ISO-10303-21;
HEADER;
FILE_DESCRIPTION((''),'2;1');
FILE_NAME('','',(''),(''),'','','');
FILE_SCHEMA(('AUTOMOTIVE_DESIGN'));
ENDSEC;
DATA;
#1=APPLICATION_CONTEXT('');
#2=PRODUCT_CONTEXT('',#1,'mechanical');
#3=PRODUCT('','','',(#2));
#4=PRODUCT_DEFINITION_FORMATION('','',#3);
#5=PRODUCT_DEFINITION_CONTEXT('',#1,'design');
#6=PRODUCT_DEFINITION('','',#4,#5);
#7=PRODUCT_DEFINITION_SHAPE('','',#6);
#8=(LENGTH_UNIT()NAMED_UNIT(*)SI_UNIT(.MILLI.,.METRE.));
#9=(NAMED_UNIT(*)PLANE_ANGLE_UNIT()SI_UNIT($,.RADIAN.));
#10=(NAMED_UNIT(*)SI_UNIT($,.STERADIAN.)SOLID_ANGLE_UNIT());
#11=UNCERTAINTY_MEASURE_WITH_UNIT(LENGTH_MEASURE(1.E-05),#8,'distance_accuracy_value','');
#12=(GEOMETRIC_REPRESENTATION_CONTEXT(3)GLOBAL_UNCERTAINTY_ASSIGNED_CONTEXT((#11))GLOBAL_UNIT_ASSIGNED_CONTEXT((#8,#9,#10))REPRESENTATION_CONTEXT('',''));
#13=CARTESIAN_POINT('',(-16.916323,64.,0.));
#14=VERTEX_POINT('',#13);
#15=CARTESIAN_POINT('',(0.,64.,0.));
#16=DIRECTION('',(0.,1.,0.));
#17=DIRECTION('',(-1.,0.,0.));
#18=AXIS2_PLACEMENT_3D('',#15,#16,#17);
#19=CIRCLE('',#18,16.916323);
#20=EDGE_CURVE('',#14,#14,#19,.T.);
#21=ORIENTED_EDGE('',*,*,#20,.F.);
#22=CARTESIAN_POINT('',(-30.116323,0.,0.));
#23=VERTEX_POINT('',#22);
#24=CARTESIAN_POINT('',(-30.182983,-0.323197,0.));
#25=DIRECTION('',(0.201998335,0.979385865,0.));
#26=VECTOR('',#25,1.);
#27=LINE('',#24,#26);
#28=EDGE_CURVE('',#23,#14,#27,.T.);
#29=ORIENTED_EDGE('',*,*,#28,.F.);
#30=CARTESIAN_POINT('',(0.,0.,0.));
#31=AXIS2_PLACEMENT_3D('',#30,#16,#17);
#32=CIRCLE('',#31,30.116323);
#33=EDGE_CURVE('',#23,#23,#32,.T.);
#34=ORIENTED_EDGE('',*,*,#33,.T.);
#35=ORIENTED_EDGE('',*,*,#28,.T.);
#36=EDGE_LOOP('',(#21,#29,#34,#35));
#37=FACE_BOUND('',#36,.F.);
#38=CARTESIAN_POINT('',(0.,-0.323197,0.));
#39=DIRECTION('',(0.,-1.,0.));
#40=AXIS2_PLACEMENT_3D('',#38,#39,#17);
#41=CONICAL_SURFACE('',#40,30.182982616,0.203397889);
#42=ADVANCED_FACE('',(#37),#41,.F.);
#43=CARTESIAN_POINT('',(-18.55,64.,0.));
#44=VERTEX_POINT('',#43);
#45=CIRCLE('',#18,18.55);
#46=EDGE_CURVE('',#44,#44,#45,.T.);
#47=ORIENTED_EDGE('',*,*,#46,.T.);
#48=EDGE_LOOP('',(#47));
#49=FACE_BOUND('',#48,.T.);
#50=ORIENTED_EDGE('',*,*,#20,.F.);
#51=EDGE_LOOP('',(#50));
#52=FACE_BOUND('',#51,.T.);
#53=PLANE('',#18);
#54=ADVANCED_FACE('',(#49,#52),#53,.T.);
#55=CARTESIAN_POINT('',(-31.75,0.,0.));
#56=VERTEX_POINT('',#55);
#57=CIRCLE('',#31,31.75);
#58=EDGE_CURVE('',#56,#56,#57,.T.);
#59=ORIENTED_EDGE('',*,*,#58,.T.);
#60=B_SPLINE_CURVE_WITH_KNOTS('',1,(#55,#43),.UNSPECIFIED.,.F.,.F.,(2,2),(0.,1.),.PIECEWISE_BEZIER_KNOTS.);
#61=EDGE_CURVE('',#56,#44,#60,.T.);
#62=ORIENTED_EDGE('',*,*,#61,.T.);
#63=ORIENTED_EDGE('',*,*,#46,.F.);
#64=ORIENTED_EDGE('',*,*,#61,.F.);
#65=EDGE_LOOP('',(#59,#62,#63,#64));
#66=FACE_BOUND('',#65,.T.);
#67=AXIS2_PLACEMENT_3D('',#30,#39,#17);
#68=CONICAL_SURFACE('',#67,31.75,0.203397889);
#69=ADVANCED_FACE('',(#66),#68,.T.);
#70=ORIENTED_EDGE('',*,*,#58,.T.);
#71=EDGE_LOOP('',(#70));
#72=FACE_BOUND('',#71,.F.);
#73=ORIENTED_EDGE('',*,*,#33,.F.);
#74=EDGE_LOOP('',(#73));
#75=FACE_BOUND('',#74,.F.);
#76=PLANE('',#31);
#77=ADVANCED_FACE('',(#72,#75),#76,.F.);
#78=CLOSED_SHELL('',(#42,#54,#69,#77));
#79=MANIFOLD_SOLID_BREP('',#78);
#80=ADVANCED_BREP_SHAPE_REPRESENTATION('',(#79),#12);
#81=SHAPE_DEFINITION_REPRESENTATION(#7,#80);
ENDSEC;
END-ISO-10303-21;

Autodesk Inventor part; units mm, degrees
ref_plane "YZ Plane" through (0, 0, 0) normal (1, 0, 0) x (0, 1, 0)
ref_plane "XY Plane" through (0, 0, 0) normal (0, 0, 1) x (1, 0, 0)
sketch "Szkic6" plane through (0, 0, 0) normal (0, 1, 0) x (-1, 0, 0)
  circle A0 centre (0, 0) radius 31.75
  dimension "d33" = 63.5
ref_plane "Płaszczyzna konstrukcyjna1" through (0, 64, 0) normal (0, 1, 0) x (-1, 0, 0)
sketch "Szkic7" plane through (0, 64, 0) normal (0, 1, 0) x (-1, 0, 0)
  circle A0 centre (0, 0) radius 18.55
  dimension "d35" = 37.1
loft "Wyciągnięcie złożone1" add profiles "Szkic6", "Szkic7"
shell "Skorupa1" thickness 1.6 removed faces 2 at (-0.5746, 64, -5.4455) at (14.3997, 0, 5.5289)
equation "\"d33\" = OD1"
equation "\"d35\" = OD2"
equation "\"d52\" = THK"
equation "\"SzerokośćGięciaPodcięcia\" = Grubość"
equation "\"RozmiarPodcięciaNarożnika\" = 4 * Grubość"
equation "\"PromieńPrzejścia\" = PromieńGięcia"
equation "\"Rozmiar_promienia_Jacobiego\" = PromieńGięcia"
equation "\"Wielk_odstępu\" = Grubość"
equation "\"d2\" = PromieńGięcia"
equation "\"d23\" = PromieńGięcia"
equation "\"OD1\" = 63.5"
equation "\"OD2\" = 37.1"
equation "\"L\" = 64"
equation "\"THK\" = 1.6"
equation "\"d34\" = L"
equation "\"Grubość\" = 1.5"
equation "\"PromieńGięcia\" = 3"
properties part number "Redukcja symetryczna Ø63,5x37,1x1,6 L=64" material "304"
